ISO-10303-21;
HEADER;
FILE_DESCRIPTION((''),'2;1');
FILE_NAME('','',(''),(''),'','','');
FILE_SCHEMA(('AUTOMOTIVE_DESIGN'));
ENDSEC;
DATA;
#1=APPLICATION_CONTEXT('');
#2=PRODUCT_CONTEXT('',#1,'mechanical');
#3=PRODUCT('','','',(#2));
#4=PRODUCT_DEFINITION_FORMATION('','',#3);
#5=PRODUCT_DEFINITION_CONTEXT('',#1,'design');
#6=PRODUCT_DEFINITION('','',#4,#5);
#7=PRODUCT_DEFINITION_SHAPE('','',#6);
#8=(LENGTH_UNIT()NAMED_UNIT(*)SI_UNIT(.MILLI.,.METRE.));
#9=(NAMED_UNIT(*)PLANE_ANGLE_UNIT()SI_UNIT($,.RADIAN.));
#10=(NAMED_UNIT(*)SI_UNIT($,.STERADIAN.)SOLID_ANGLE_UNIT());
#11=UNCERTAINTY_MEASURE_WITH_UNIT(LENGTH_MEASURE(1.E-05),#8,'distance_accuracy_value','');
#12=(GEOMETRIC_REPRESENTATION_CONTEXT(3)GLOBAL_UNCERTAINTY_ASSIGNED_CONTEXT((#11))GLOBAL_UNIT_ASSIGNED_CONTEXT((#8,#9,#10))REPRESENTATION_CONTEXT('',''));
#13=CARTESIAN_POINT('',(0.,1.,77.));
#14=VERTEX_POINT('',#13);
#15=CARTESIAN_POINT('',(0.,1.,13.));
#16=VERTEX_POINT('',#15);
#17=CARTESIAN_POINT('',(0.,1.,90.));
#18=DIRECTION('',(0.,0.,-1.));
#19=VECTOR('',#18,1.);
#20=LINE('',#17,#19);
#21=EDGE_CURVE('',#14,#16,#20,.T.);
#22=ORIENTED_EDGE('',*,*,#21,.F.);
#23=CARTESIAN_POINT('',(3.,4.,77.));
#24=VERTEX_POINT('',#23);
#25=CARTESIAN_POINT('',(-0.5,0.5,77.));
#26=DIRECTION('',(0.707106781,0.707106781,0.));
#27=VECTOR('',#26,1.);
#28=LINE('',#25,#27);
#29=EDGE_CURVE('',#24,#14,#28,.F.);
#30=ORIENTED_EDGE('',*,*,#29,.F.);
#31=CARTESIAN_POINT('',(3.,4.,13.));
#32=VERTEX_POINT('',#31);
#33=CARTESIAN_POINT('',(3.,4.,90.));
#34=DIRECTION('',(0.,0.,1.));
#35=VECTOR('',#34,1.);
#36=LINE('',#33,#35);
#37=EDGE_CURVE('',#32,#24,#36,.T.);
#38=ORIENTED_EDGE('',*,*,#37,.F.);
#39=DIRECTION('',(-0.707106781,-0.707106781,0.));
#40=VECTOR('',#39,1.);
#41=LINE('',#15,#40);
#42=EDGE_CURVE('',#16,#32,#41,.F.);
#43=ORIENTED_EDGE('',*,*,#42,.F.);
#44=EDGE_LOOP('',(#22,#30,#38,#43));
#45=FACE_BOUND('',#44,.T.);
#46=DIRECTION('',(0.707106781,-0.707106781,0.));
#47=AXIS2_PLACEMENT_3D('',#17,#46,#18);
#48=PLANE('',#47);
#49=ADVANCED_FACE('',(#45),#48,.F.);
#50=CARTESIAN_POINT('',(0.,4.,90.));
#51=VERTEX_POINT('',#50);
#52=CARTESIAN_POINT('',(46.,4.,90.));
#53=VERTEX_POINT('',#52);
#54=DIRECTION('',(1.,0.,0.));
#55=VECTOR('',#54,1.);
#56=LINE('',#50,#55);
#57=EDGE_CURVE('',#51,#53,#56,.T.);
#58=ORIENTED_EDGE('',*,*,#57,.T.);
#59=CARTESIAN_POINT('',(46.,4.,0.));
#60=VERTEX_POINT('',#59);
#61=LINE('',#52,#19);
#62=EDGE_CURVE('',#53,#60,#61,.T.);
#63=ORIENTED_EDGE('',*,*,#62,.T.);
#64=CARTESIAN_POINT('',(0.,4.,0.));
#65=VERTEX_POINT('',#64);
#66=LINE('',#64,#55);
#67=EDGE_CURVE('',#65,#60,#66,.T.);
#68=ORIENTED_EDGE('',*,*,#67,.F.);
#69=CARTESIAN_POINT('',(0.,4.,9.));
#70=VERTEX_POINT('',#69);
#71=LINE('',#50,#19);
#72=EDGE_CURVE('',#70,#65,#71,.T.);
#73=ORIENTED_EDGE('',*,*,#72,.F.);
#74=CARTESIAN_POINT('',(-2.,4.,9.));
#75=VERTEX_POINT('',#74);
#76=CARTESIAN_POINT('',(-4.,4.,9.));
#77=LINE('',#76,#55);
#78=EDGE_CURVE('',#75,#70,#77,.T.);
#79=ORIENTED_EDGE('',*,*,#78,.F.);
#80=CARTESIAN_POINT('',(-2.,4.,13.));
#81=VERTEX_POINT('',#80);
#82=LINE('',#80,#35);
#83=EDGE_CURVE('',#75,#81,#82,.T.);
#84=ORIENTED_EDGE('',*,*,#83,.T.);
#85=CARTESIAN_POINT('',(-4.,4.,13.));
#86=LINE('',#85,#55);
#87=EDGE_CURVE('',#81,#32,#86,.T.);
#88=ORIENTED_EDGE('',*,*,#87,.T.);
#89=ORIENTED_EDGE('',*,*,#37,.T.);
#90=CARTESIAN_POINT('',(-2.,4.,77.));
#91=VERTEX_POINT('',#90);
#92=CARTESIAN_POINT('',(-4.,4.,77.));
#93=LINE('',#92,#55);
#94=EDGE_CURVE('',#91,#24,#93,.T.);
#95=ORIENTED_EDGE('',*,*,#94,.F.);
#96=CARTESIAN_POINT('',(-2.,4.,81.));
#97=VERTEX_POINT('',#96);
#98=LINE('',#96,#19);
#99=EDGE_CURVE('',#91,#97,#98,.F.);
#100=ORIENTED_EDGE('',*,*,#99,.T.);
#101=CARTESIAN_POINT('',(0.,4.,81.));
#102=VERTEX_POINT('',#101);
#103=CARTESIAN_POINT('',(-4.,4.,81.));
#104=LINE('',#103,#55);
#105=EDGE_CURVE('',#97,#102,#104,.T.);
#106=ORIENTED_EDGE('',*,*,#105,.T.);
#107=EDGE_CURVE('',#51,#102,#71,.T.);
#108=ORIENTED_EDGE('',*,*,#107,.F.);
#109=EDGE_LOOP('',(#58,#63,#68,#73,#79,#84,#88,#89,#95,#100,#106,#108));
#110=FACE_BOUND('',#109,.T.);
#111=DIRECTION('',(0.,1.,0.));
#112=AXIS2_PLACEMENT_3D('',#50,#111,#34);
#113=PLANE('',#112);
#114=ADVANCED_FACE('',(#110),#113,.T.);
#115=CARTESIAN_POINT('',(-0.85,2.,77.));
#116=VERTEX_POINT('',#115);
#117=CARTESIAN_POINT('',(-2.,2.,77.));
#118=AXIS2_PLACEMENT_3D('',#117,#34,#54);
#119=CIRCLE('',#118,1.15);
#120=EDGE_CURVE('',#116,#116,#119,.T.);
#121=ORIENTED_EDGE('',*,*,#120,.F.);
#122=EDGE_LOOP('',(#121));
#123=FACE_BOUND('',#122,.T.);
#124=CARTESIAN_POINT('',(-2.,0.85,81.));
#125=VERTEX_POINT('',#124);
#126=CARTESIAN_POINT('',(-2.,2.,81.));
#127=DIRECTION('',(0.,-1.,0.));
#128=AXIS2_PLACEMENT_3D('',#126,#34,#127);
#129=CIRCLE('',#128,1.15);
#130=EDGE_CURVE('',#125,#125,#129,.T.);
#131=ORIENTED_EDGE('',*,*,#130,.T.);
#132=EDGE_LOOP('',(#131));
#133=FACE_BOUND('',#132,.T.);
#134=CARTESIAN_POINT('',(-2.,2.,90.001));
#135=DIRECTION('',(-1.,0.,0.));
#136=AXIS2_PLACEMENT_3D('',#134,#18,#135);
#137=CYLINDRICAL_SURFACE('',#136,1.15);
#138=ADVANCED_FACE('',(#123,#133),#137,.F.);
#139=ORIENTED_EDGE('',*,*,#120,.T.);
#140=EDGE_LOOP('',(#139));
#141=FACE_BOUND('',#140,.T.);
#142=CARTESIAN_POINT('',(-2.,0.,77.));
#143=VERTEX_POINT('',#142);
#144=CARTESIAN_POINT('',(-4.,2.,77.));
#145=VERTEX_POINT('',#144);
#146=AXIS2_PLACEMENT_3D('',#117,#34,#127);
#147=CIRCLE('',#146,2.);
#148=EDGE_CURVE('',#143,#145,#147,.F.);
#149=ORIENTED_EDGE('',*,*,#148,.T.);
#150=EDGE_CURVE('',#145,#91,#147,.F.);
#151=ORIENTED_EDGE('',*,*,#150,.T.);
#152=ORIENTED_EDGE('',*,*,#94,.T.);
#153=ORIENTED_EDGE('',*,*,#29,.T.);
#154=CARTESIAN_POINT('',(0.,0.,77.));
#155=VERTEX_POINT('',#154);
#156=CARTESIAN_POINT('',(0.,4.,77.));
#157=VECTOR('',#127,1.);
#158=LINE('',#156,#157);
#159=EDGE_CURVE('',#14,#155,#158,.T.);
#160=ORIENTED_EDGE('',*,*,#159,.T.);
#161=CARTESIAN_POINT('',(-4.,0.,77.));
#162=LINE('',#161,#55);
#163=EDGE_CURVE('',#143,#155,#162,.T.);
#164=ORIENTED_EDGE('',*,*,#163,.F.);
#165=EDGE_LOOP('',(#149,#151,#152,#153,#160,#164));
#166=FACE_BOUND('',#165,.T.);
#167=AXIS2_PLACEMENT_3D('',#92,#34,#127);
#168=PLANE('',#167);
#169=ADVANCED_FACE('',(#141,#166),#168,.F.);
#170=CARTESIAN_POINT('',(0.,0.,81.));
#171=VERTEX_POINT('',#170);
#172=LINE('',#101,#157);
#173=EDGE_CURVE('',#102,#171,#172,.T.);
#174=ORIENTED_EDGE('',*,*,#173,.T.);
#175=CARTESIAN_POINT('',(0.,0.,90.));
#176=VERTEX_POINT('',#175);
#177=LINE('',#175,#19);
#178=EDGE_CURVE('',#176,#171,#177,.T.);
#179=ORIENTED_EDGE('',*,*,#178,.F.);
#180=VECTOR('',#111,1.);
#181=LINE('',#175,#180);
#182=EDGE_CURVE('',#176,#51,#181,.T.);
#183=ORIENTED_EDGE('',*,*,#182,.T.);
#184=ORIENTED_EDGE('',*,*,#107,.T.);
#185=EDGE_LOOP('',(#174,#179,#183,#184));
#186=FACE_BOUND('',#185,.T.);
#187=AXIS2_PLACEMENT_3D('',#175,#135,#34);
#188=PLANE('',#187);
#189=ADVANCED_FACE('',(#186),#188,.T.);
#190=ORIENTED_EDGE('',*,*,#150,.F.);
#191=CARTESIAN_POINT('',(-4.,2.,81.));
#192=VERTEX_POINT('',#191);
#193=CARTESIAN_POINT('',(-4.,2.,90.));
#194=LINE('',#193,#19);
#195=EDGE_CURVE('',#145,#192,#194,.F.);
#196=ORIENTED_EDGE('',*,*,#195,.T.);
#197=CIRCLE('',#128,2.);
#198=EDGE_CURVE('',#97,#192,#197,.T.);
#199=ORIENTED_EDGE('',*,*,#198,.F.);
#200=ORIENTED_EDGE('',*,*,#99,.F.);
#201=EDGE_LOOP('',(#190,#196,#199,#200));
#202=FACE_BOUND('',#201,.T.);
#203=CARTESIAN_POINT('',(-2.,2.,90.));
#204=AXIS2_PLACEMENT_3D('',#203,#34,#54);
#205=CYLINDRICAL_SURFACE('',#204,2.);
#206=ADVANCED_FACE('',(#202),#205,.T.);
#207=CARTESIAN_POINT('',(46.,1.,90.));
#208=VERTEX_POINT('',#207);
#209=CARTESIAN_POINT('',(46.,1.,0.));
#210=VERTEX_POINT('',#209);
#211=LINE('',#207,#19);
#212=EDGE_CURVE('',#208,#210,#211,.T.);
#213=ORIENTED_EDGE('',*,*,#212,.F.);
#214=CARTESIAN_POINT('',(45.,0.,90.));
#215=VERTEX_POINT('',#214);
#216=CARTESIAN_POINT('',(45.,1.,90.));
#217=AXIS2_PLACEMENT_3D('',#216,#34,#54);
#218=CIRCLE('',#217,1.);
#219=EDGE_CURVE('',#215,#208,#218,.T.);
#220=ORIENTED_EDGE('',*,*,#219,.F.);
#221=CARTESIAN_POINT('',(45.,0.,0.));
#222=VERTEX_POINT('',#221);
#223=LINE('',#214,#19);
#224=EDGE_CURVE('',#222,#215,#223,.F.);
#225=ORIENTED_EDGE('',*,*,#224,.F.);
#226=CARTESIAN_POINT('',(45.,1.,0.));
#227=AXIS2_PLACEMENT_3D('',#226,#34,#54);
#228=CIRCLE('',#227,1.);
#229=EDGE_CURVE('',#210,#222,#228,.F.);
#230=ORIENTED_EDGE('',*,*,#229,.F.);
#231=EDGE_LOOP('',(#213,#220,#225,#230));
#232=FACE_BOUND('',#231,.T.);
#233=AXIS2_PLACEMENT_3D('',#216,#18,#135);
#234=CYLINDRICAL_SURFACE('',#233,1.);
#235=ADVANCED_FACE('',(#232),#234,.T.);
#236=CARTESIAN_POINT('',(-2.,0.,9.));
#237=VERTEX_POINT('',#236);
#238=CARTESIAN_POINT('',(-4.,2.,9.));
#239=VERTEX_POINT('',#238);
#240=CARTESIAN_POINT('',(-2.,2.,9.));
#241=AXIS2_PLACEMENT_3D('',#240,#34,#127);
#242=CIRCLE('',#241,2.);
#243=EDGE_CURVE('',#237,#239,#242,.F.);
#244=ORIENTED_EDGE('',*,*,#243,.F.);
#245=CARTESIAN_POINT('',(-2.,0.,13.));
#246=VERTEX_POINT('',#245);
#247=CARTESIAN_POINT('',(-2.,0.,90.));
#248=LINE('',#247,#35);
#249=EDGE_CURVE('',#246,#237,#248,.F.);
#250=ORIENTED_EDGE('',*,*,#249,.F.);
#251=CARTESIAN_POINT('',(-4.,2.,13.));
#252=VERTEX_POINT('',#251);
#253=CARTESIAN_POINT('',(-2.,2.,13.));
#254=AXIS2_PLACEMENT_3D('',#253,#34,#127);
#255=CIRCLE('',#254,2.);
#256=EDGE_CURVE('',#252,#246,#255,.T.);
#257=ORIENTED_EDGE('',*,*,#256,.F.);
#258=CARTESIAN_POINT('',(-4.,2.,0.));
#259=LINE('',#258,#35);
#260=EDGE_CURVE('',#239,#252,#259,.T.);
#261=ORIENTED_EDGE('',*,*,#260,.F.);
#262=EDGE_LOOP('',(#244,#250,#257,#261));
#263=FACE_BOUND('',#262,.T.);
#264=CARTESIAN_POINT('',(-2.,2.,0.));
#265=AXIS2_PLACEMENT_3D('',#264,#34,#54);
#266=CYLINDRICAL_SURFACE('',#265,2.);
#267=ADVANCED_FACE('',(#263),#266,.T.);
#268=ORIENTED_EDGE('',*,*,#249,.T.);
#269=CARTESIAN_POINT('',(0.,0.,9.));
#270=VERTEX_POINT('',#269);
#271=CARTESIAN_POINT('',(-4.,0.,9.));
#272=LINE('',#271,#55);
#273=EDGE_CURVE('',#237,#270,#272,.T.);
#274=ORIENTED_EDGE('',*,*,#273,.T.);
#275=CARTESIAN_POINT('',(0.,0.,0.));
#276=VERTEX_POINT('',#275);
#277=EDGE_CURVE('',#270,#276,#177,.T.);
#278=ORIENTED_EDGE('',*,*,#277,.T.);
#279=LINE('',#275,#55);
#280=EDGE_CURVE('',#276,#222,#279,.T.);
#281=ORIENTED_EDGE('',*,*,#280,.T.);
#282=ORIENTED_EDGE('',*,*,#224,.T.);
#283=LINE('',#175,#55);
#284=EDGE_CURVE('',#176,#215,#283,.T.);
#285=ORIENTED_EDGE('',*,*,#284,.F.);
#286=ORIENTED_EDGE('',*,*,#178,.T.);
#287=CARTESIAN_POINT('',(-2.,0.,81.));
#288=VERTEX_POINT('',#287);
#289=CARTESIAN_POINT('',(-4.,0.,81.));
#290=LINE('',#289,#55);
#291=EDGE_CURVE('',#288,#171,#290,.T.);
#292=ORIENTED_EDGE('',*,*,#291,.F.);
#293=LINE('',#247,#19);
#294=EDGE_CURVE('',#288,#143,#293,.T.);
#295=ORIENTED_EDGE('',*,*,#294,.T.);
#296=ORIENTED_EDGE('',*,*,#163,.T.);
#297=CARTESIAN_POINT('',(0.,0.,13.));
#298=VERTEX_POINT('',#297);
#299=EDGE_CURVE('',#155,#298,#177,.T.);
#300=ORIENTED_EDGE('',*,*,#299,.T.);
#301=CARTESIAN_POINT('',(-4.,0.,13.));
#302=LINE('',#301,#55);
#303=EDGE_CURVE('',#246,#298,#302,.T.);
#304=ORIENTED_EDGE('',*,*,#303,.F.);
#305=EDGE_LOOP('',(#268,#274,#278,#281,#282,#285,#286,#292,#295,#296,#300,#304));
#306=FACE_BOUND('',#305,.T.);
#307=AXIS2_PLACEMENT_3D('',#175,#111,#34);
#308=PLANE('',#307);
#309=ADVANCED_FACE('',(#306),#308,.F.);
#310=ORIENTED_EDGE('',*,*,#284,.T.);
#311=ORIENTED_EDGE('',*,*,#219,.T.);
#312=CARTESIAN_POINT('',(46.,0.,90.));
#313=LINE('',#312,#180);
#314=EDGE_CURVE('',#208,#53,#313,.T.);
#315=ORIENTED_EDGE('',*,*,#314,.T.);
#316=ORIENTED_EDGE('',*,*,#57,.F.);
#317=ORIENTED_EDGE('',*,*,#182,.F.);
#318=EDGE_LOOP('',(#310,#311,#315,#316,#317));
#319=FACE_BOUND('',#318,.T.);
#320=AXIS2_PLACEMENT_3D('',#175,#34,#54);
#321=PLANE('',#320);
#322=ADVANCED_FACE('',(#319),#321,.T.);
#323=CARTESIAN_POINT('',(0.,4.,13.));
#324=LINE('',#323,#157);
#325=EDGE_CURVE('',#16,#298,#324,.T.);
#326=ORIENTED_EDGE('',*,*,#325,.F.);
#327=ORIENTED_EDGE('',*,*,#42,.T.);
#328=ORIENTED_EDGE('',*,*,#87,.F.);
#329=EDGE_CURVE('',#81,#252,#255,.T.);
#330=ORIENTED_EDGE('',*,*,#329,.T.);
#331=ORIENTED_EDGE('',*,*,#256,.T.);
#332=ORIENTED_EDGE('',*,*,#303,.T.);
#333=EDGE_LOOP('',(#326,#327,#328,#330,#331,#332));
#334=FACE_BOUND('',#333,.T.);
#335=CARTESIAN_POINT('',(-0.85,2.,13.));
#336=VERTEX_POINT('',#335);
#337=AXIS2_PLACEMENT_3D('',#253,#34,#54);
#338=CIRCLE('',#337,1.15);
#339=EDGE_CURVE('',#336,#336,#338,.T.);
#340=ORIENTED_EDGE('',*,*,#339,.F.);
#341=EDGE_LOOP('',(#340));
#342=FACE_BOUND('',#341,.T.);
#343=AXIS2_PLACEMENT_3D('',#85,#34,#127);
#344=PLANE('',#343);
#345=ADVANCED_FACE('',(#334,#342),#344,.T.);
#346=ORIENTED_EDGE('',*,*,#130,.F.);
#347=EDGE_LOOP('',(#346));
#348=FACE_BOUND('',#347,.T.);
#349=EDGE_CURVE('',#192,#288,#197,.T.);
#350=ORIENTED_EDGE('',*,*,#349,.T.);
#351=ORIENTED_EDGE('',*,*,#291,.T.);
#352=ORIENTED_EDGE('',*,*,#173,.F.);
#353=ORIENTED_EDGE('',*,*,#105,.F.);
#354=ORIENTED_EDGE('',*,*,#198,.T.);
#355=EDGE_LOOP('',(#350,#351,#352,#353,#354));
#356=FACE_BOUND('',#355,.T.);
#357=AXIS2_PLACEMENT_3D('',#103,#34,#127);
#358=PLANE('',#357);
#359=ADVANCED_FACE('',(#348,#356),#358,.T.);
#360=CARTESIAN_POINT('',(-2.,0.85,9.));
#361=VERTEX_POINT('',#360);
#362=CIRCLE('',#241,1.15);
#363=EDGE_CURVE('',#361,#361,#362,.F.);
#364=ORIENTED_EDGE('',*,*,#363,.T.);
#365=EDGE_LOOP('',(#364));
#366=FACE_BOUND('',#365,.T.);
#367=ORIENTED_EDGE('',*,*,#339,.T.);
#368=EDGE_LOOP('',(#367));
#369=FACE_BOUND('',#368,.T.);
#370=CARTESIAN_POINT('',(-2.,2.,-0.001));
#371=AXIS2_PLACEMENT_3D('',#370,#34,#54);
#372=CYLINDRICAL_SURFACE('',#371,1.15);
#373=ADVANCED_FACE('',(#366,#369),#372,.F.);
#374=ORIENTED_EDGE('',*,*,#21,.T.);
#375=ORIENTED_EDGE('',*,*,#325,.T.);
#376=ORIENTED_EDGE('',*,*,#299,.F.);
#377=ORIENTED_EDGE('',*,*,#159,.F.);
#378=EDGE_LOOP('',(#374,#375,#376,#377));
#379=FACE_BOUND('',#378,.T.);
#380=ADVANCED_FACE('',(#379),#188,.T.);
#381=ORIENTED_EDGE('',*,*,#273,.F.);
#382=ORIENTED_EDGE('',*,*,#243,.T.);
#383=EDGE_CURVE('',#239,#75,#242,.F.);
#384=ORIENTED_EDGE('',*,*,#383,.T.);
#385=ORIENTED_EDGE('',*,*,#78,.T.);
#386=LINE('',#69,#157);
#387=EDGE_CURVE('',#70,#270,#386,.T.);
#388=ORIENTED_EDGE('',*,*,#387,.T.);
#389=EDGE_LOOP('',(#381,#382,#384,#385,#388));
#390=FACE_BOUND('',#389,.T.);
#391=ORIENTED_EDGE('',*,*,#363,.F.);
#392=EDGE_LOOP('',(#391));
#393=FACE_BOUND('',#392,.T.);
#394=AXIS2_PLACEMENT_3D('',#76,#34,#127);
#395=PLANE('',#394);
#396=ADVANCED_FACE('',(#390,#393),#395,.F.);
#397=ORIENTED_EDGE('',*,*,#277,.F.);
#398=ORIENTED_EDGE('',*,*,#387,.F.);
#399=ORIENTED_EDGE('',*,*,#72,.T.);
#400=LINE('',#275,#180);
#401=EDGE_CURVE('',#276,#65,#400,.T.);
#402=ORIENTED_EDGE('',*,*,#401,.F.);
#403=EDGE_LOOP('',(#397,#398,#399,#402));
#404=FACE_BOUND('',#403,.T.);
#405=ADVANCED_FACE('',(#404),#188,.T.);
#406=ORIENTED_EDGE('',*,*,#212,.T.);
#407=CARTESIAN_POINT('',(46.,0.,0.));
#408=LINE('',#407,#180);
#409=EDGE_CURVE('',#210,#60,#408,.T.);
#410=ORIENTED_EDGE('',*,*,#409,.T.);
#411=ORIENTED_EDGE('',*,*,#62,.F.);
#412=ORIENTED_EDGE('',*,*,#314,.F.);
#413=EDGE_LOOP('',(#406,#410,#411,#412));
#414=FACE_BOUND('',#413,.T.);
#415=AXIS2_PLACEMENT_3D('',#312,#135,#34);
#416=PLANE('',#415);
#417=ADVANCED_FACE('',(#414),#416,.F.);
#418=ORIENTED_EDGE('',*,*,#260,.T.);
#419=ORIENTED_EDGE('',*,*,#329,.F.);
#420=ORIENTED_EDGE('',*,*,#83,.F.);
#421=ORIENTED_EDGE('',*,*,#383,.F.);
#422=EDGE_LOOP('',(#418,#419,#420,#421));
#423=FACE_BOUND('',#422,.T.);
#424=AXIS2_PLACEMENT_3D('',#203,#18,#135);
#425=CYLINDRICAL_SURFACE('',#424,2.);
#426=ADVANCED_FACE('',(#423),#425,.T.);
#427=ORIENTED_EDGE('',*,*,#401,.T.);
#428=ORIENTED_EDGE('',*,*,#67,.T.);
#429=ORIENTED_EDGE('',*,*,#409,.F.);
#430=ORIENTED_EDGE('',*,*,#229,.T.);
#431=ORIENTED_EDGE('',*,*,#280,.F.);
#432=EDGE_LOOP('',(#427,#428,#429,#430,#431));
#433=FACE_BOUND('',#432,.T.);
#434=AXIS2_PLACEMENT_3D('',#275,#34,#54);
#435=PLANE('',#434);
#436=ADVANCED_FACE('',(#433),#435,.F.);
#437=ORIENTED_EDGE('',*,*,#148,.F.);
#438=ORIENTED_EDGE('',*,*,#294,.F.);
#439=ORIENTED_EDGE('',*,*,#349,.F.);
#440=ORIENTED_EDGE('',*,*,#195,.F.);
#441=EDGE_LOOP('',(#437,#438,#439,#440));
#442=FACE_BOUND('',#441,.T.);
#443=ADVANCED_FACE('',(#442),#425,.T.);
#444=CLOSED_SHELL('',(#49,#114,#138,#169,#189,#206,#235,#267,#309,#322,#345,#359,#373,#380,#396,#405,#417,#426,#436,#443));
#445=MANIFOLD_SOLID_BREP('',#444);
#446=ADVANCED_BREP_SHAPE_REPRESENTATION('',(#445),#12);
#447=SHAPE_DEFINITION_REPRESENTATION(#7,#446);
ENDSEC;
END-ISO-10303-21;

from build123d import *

# Parameters (mm, degrees)
SKETCH_2_W             = 46
SKETCH_2_H             = 4
EXTRUDE_1_DEPTH        = 90
SKETCH_3_W             = 4
SKETCH_3_H             = 4
EXTRUDE_2_DEPTH        = 4
FILLET_1_R             = 2
CUT_EXTRUDE_1_REACH    = 91.783
SKETCH_4_R             = 1.15
FILLET_1_OF_MIRROR_3_R = 2
FILLET_2_R             = 1
CHAMFER_1_SIZE         = 3


with BuildPart() as part:
    # 草图2 → 凸台-拉伸1 (new body)
    with BuildSketch(Plane.XY):
        with Locations((23, 2)):
            Rectangle(SKETCH_2_W, SKETCH_2_H)
    extrude(amount=EXTRUDE_1_DEPTH)

    # 草图3 → 凸台-拉伸2 (add)
    with BuildSketch(Plane.ZY):
        with Locations((11, 2)):
            Rectangle(SKETCH_3_W, SKETCH_3_H)
    extrude_2 = extrude(amount=EXTRUDE_2_DEPTH)

    # 圆角1
    fillet_1_edges = [part.edges().sort_by_distance(p)[0] for p in [
        (-4, 4, 11),
        (-4, 0, 11),
    ]]
    fillet(fillet_1_edges, radius=FILLET_1_R - 0.0001)  # a hair under: the kernel refuses the full size

    # 草图4 → 切除-拉伸1 (cut, up to next)
    with BuildSketch(Plane.XY.offset(13), mode=Mode.PRIVATE) as cut_extrude_1_sk1:
        with Locations((-2, 2)):
            Circle(SKETCH_4_R)
    cut_extrude_1_tool1 = extrude(cut_extrude_1_sk1.sketch, amount=-CUT_EXTRUDE_1_REACH, mode=Mode.PRIVATE) & part.part
    cut_extrude_1 = cut_extrude_1_tool1.solids().sort_by_distance((-2, 2, 13))[0]
    add(cut_extrude_1, mode=Mode.SUBTRACT)

    # 镜向3: 凸台-拉伸2, 切除-拉伸1 across plane
    add(extrude_2.mirror(Plane(origin=(0, 0, 45), x_dir=(1, 0, 0), z_dir=(0, 0, -1))))
    add(cut_extrude_1.mirror(Plane(origin=(0, 0, 45), x_dir=(1, 0, 0), z_dir=(0, 0, -1))), mode=Mode.SUBTRACT)

    # 圆角1 of 镜向3
    fillet_1_of_mirror_3_edges = [part.edges().sort_by_distance(p)[0] for p in [
        (-4, 4, 79),
        (-4, 0, 79),
    ]]
    fillet(fillet_1_of_mirror_3_edges, radius=FILLET_1_OF_MIRROR_3_R - 0.0001)  # a hair under: the kernel refuses the full size

    # 圆角2
    fillet_2_edges = [part.edges().sort_by_distance(p)[0] for p in [
        (46, 0, 45),
    ]]
    fillet(fillet_2_edges, radius=FILLET_2_R)

    # 倒角1
    chamfer_1_edges = [part.edges().sort_by_distance(p)[0] for p in [
        (0, 4, 45),
    ]]
    chamfer(chamfer_1_edges, length=CHAMFER_1_SIZE)


solid = part.part
